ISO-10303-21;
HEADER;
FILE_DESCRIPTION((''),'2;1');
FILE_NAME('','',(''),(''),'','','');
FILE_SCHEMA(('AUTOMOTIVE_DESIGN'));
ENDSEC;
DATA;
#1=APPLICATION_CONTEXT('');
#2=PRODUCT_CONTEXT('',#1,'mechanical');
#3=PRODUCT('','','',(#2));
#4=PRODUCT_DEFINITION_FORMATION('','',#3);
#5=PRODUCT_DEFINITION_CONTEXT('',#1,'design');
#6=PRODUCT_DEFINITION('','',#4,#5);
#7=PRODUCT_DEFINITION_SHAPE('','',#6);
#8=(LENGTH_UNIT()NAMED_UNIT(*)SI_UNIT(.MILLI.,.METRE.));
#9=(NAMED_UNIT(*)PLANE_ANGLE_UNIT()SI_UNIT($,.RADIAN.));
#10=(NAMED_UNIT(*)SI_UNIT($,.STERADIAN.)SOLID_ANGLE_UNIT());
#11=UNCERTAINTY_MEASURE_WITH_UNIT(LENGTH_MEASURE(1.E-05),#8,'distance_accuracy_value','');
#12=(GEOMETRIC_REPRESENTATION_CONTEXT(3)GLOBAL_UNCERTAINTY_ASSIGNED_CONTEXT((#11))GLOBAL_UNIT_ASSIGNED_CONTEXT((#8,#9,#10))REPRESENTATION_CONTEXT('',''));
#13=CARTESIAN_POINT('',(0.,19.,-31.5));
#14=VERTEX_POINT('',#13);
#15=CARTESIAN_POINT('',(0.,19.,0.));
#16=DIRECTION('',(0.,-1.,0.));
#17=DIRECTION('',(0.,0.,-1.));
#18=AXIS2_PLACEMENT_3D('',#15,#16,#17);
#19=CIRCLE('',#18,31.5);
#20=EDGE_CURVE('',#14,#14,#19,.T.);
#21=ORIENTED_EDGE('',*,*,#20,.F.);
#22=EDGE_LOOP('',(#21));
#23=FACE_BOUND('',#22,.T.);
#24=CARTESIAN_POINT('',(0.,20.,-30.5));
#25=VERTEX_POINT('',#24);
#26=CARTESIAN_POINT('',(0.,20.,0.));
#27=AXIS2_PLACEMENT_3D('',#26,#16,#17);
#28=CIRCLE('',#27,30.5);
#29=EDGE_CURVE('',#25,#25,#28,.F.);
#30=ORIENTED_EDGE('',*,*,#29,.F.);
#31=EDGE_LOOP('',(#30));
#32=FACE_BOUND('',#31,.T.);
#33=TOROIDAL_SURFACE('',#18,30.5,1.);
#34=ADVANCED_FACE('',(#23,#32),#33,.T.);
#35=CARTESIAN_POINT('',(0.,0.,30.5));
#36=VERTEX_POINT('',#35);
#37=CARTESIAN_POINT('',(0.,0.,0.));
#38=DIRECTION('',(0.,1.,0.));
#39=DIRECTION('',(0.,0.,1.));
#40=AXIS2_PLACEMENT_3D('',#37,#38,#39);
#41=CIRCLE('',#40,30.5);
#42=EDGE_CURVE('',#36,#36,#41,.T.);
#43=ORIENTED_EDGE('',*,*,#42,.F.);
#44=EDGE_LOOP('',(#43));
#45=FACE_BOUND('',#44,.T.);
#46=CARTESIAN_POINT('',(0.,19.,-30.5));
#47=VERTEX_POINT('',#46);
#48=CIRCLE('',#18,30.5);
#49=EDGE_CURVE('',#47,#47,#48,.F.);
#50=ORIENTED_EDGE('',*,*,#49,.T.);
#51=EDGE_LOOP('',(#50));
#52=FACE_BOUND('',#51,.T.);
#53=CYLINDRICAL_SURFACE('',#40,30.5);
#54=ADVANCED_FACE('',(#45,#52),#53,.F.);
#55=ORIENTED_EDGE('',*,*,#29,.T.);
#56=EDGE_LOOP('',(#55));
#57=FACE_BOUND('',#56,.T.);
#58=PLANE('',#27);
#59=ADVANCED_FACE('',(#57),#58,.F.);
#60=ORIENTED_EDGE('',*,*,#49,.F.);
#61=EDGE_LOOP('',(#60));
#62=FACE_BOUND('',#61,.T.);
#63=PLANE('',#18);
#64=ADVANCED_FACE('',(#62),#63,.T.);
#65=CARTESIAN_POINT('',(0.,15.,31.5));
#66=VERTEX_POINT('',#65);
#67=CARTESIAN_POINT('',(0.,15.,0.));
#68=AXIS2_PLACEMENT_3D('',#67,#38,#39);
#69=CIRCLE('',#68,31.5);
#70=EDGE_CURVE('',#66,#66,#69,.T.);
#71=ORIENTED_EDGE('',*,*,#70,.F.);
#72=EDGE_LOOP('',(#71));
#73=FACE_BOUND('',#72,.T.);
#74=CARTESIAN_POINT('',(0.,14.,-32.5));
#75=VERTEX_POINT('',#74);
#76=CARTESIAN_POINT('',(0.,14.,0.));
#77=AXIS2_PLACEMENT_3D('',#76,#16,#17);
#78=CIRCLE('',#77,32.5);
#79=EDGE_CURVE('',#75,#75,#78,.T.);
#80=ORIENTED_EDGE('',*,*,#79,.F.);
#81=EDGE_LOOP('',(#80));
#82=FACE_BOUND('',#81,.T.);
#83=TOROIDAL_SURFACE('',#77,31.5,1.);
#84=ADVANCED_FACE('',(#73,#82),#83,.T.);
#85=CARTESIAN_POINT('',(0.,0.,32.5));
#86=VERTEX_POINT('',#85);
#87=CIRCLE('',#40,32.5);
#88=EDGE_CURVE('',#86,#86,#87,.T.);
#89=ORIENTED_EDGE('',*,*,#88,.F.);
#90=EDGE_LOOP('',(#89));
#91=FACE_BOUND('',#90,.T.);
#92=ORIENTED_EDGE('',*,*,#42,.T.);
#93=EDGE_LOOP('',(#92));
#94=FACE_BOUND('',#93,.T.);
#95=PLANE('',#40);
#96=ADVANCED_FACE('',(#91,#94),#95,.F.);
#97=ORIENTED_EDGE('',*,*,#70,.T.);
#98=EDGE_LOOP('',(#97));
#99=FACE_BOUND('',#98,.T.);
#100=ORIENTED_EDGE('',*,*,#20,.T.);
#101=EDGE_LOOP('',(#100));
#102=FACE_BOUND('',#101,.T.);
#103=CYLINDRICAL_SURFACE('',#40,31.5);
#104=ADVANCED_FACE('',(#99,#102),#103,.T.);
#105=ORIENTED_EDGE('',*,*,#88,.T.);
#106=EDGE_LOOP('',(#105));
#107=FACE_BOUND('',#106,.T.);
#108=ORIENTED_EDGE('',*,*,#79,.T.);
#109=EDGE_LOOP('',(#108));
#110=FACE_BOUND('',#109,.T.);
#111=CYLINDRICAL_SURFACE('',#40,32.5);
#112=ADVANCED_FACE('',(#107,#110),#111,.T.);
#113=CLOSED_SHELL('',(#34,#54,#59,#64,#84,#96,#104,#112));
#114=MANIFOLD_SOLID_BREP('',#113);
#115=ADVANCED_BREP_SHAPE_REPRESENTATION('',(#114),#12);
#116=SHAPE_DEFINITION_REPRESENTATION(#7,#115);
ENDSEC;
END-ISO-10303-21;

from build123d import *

# Parameters (mm, degrees)
CONG_1_R         = 1
CONG_2_R         = 1
COQUE3_OUTLINE_R = 30.5
COQUE3_DEPTH     = 19


# Read off the part's stored shape, not the designer's step: Coque3
with BuildPart() as part:
    # Esquisse1 → Révolution1 (revolve)
    with BuildSketch(Plane.XY, mode=Mode.PRIVATE) as r_volution1_sk:
        Polygon((0, 0), (32.5, 0), (32.5, 15), (31.5, 15), (31.5, 20), (0, 20), align=None)
    revolve(r_volution1_sk.sketch.rotate(Axis((0, 0, 0), (0, -1, 0)), 90), axis=Axis((0, 0, 0), (0, -1, 0)))

    # Congé1
    cong_1_edges = [part.edges().sort_by_distance(p)[0] for p in [
        (0, 20, -31.5),
    ]]
    fillet(cong_1_edges, radius=CONG_1_R)

    # Congé2
    cong_2_edges = [part.edges().sort_by_distance(p)[0] for p in [
        (0, 15, -32.5),
    ]]
    fillet(cong_2_edges, radius=CONG_2_R - 0.0001)  # a hair under: the kernel refuses the full size

    # Coque3 outline → Coque3 (cut)
    with BuildSketch(Plane(origin=(0, 0, 0), x_dir=(1, 0, 0), z_dir=(0, 1, 0))):
        Circle(COQUE3_OUTLINE_R)
    extrude(amount=COQUE3_DEPTH, mode=Mode.SUBTRACT)


solid = part.part
